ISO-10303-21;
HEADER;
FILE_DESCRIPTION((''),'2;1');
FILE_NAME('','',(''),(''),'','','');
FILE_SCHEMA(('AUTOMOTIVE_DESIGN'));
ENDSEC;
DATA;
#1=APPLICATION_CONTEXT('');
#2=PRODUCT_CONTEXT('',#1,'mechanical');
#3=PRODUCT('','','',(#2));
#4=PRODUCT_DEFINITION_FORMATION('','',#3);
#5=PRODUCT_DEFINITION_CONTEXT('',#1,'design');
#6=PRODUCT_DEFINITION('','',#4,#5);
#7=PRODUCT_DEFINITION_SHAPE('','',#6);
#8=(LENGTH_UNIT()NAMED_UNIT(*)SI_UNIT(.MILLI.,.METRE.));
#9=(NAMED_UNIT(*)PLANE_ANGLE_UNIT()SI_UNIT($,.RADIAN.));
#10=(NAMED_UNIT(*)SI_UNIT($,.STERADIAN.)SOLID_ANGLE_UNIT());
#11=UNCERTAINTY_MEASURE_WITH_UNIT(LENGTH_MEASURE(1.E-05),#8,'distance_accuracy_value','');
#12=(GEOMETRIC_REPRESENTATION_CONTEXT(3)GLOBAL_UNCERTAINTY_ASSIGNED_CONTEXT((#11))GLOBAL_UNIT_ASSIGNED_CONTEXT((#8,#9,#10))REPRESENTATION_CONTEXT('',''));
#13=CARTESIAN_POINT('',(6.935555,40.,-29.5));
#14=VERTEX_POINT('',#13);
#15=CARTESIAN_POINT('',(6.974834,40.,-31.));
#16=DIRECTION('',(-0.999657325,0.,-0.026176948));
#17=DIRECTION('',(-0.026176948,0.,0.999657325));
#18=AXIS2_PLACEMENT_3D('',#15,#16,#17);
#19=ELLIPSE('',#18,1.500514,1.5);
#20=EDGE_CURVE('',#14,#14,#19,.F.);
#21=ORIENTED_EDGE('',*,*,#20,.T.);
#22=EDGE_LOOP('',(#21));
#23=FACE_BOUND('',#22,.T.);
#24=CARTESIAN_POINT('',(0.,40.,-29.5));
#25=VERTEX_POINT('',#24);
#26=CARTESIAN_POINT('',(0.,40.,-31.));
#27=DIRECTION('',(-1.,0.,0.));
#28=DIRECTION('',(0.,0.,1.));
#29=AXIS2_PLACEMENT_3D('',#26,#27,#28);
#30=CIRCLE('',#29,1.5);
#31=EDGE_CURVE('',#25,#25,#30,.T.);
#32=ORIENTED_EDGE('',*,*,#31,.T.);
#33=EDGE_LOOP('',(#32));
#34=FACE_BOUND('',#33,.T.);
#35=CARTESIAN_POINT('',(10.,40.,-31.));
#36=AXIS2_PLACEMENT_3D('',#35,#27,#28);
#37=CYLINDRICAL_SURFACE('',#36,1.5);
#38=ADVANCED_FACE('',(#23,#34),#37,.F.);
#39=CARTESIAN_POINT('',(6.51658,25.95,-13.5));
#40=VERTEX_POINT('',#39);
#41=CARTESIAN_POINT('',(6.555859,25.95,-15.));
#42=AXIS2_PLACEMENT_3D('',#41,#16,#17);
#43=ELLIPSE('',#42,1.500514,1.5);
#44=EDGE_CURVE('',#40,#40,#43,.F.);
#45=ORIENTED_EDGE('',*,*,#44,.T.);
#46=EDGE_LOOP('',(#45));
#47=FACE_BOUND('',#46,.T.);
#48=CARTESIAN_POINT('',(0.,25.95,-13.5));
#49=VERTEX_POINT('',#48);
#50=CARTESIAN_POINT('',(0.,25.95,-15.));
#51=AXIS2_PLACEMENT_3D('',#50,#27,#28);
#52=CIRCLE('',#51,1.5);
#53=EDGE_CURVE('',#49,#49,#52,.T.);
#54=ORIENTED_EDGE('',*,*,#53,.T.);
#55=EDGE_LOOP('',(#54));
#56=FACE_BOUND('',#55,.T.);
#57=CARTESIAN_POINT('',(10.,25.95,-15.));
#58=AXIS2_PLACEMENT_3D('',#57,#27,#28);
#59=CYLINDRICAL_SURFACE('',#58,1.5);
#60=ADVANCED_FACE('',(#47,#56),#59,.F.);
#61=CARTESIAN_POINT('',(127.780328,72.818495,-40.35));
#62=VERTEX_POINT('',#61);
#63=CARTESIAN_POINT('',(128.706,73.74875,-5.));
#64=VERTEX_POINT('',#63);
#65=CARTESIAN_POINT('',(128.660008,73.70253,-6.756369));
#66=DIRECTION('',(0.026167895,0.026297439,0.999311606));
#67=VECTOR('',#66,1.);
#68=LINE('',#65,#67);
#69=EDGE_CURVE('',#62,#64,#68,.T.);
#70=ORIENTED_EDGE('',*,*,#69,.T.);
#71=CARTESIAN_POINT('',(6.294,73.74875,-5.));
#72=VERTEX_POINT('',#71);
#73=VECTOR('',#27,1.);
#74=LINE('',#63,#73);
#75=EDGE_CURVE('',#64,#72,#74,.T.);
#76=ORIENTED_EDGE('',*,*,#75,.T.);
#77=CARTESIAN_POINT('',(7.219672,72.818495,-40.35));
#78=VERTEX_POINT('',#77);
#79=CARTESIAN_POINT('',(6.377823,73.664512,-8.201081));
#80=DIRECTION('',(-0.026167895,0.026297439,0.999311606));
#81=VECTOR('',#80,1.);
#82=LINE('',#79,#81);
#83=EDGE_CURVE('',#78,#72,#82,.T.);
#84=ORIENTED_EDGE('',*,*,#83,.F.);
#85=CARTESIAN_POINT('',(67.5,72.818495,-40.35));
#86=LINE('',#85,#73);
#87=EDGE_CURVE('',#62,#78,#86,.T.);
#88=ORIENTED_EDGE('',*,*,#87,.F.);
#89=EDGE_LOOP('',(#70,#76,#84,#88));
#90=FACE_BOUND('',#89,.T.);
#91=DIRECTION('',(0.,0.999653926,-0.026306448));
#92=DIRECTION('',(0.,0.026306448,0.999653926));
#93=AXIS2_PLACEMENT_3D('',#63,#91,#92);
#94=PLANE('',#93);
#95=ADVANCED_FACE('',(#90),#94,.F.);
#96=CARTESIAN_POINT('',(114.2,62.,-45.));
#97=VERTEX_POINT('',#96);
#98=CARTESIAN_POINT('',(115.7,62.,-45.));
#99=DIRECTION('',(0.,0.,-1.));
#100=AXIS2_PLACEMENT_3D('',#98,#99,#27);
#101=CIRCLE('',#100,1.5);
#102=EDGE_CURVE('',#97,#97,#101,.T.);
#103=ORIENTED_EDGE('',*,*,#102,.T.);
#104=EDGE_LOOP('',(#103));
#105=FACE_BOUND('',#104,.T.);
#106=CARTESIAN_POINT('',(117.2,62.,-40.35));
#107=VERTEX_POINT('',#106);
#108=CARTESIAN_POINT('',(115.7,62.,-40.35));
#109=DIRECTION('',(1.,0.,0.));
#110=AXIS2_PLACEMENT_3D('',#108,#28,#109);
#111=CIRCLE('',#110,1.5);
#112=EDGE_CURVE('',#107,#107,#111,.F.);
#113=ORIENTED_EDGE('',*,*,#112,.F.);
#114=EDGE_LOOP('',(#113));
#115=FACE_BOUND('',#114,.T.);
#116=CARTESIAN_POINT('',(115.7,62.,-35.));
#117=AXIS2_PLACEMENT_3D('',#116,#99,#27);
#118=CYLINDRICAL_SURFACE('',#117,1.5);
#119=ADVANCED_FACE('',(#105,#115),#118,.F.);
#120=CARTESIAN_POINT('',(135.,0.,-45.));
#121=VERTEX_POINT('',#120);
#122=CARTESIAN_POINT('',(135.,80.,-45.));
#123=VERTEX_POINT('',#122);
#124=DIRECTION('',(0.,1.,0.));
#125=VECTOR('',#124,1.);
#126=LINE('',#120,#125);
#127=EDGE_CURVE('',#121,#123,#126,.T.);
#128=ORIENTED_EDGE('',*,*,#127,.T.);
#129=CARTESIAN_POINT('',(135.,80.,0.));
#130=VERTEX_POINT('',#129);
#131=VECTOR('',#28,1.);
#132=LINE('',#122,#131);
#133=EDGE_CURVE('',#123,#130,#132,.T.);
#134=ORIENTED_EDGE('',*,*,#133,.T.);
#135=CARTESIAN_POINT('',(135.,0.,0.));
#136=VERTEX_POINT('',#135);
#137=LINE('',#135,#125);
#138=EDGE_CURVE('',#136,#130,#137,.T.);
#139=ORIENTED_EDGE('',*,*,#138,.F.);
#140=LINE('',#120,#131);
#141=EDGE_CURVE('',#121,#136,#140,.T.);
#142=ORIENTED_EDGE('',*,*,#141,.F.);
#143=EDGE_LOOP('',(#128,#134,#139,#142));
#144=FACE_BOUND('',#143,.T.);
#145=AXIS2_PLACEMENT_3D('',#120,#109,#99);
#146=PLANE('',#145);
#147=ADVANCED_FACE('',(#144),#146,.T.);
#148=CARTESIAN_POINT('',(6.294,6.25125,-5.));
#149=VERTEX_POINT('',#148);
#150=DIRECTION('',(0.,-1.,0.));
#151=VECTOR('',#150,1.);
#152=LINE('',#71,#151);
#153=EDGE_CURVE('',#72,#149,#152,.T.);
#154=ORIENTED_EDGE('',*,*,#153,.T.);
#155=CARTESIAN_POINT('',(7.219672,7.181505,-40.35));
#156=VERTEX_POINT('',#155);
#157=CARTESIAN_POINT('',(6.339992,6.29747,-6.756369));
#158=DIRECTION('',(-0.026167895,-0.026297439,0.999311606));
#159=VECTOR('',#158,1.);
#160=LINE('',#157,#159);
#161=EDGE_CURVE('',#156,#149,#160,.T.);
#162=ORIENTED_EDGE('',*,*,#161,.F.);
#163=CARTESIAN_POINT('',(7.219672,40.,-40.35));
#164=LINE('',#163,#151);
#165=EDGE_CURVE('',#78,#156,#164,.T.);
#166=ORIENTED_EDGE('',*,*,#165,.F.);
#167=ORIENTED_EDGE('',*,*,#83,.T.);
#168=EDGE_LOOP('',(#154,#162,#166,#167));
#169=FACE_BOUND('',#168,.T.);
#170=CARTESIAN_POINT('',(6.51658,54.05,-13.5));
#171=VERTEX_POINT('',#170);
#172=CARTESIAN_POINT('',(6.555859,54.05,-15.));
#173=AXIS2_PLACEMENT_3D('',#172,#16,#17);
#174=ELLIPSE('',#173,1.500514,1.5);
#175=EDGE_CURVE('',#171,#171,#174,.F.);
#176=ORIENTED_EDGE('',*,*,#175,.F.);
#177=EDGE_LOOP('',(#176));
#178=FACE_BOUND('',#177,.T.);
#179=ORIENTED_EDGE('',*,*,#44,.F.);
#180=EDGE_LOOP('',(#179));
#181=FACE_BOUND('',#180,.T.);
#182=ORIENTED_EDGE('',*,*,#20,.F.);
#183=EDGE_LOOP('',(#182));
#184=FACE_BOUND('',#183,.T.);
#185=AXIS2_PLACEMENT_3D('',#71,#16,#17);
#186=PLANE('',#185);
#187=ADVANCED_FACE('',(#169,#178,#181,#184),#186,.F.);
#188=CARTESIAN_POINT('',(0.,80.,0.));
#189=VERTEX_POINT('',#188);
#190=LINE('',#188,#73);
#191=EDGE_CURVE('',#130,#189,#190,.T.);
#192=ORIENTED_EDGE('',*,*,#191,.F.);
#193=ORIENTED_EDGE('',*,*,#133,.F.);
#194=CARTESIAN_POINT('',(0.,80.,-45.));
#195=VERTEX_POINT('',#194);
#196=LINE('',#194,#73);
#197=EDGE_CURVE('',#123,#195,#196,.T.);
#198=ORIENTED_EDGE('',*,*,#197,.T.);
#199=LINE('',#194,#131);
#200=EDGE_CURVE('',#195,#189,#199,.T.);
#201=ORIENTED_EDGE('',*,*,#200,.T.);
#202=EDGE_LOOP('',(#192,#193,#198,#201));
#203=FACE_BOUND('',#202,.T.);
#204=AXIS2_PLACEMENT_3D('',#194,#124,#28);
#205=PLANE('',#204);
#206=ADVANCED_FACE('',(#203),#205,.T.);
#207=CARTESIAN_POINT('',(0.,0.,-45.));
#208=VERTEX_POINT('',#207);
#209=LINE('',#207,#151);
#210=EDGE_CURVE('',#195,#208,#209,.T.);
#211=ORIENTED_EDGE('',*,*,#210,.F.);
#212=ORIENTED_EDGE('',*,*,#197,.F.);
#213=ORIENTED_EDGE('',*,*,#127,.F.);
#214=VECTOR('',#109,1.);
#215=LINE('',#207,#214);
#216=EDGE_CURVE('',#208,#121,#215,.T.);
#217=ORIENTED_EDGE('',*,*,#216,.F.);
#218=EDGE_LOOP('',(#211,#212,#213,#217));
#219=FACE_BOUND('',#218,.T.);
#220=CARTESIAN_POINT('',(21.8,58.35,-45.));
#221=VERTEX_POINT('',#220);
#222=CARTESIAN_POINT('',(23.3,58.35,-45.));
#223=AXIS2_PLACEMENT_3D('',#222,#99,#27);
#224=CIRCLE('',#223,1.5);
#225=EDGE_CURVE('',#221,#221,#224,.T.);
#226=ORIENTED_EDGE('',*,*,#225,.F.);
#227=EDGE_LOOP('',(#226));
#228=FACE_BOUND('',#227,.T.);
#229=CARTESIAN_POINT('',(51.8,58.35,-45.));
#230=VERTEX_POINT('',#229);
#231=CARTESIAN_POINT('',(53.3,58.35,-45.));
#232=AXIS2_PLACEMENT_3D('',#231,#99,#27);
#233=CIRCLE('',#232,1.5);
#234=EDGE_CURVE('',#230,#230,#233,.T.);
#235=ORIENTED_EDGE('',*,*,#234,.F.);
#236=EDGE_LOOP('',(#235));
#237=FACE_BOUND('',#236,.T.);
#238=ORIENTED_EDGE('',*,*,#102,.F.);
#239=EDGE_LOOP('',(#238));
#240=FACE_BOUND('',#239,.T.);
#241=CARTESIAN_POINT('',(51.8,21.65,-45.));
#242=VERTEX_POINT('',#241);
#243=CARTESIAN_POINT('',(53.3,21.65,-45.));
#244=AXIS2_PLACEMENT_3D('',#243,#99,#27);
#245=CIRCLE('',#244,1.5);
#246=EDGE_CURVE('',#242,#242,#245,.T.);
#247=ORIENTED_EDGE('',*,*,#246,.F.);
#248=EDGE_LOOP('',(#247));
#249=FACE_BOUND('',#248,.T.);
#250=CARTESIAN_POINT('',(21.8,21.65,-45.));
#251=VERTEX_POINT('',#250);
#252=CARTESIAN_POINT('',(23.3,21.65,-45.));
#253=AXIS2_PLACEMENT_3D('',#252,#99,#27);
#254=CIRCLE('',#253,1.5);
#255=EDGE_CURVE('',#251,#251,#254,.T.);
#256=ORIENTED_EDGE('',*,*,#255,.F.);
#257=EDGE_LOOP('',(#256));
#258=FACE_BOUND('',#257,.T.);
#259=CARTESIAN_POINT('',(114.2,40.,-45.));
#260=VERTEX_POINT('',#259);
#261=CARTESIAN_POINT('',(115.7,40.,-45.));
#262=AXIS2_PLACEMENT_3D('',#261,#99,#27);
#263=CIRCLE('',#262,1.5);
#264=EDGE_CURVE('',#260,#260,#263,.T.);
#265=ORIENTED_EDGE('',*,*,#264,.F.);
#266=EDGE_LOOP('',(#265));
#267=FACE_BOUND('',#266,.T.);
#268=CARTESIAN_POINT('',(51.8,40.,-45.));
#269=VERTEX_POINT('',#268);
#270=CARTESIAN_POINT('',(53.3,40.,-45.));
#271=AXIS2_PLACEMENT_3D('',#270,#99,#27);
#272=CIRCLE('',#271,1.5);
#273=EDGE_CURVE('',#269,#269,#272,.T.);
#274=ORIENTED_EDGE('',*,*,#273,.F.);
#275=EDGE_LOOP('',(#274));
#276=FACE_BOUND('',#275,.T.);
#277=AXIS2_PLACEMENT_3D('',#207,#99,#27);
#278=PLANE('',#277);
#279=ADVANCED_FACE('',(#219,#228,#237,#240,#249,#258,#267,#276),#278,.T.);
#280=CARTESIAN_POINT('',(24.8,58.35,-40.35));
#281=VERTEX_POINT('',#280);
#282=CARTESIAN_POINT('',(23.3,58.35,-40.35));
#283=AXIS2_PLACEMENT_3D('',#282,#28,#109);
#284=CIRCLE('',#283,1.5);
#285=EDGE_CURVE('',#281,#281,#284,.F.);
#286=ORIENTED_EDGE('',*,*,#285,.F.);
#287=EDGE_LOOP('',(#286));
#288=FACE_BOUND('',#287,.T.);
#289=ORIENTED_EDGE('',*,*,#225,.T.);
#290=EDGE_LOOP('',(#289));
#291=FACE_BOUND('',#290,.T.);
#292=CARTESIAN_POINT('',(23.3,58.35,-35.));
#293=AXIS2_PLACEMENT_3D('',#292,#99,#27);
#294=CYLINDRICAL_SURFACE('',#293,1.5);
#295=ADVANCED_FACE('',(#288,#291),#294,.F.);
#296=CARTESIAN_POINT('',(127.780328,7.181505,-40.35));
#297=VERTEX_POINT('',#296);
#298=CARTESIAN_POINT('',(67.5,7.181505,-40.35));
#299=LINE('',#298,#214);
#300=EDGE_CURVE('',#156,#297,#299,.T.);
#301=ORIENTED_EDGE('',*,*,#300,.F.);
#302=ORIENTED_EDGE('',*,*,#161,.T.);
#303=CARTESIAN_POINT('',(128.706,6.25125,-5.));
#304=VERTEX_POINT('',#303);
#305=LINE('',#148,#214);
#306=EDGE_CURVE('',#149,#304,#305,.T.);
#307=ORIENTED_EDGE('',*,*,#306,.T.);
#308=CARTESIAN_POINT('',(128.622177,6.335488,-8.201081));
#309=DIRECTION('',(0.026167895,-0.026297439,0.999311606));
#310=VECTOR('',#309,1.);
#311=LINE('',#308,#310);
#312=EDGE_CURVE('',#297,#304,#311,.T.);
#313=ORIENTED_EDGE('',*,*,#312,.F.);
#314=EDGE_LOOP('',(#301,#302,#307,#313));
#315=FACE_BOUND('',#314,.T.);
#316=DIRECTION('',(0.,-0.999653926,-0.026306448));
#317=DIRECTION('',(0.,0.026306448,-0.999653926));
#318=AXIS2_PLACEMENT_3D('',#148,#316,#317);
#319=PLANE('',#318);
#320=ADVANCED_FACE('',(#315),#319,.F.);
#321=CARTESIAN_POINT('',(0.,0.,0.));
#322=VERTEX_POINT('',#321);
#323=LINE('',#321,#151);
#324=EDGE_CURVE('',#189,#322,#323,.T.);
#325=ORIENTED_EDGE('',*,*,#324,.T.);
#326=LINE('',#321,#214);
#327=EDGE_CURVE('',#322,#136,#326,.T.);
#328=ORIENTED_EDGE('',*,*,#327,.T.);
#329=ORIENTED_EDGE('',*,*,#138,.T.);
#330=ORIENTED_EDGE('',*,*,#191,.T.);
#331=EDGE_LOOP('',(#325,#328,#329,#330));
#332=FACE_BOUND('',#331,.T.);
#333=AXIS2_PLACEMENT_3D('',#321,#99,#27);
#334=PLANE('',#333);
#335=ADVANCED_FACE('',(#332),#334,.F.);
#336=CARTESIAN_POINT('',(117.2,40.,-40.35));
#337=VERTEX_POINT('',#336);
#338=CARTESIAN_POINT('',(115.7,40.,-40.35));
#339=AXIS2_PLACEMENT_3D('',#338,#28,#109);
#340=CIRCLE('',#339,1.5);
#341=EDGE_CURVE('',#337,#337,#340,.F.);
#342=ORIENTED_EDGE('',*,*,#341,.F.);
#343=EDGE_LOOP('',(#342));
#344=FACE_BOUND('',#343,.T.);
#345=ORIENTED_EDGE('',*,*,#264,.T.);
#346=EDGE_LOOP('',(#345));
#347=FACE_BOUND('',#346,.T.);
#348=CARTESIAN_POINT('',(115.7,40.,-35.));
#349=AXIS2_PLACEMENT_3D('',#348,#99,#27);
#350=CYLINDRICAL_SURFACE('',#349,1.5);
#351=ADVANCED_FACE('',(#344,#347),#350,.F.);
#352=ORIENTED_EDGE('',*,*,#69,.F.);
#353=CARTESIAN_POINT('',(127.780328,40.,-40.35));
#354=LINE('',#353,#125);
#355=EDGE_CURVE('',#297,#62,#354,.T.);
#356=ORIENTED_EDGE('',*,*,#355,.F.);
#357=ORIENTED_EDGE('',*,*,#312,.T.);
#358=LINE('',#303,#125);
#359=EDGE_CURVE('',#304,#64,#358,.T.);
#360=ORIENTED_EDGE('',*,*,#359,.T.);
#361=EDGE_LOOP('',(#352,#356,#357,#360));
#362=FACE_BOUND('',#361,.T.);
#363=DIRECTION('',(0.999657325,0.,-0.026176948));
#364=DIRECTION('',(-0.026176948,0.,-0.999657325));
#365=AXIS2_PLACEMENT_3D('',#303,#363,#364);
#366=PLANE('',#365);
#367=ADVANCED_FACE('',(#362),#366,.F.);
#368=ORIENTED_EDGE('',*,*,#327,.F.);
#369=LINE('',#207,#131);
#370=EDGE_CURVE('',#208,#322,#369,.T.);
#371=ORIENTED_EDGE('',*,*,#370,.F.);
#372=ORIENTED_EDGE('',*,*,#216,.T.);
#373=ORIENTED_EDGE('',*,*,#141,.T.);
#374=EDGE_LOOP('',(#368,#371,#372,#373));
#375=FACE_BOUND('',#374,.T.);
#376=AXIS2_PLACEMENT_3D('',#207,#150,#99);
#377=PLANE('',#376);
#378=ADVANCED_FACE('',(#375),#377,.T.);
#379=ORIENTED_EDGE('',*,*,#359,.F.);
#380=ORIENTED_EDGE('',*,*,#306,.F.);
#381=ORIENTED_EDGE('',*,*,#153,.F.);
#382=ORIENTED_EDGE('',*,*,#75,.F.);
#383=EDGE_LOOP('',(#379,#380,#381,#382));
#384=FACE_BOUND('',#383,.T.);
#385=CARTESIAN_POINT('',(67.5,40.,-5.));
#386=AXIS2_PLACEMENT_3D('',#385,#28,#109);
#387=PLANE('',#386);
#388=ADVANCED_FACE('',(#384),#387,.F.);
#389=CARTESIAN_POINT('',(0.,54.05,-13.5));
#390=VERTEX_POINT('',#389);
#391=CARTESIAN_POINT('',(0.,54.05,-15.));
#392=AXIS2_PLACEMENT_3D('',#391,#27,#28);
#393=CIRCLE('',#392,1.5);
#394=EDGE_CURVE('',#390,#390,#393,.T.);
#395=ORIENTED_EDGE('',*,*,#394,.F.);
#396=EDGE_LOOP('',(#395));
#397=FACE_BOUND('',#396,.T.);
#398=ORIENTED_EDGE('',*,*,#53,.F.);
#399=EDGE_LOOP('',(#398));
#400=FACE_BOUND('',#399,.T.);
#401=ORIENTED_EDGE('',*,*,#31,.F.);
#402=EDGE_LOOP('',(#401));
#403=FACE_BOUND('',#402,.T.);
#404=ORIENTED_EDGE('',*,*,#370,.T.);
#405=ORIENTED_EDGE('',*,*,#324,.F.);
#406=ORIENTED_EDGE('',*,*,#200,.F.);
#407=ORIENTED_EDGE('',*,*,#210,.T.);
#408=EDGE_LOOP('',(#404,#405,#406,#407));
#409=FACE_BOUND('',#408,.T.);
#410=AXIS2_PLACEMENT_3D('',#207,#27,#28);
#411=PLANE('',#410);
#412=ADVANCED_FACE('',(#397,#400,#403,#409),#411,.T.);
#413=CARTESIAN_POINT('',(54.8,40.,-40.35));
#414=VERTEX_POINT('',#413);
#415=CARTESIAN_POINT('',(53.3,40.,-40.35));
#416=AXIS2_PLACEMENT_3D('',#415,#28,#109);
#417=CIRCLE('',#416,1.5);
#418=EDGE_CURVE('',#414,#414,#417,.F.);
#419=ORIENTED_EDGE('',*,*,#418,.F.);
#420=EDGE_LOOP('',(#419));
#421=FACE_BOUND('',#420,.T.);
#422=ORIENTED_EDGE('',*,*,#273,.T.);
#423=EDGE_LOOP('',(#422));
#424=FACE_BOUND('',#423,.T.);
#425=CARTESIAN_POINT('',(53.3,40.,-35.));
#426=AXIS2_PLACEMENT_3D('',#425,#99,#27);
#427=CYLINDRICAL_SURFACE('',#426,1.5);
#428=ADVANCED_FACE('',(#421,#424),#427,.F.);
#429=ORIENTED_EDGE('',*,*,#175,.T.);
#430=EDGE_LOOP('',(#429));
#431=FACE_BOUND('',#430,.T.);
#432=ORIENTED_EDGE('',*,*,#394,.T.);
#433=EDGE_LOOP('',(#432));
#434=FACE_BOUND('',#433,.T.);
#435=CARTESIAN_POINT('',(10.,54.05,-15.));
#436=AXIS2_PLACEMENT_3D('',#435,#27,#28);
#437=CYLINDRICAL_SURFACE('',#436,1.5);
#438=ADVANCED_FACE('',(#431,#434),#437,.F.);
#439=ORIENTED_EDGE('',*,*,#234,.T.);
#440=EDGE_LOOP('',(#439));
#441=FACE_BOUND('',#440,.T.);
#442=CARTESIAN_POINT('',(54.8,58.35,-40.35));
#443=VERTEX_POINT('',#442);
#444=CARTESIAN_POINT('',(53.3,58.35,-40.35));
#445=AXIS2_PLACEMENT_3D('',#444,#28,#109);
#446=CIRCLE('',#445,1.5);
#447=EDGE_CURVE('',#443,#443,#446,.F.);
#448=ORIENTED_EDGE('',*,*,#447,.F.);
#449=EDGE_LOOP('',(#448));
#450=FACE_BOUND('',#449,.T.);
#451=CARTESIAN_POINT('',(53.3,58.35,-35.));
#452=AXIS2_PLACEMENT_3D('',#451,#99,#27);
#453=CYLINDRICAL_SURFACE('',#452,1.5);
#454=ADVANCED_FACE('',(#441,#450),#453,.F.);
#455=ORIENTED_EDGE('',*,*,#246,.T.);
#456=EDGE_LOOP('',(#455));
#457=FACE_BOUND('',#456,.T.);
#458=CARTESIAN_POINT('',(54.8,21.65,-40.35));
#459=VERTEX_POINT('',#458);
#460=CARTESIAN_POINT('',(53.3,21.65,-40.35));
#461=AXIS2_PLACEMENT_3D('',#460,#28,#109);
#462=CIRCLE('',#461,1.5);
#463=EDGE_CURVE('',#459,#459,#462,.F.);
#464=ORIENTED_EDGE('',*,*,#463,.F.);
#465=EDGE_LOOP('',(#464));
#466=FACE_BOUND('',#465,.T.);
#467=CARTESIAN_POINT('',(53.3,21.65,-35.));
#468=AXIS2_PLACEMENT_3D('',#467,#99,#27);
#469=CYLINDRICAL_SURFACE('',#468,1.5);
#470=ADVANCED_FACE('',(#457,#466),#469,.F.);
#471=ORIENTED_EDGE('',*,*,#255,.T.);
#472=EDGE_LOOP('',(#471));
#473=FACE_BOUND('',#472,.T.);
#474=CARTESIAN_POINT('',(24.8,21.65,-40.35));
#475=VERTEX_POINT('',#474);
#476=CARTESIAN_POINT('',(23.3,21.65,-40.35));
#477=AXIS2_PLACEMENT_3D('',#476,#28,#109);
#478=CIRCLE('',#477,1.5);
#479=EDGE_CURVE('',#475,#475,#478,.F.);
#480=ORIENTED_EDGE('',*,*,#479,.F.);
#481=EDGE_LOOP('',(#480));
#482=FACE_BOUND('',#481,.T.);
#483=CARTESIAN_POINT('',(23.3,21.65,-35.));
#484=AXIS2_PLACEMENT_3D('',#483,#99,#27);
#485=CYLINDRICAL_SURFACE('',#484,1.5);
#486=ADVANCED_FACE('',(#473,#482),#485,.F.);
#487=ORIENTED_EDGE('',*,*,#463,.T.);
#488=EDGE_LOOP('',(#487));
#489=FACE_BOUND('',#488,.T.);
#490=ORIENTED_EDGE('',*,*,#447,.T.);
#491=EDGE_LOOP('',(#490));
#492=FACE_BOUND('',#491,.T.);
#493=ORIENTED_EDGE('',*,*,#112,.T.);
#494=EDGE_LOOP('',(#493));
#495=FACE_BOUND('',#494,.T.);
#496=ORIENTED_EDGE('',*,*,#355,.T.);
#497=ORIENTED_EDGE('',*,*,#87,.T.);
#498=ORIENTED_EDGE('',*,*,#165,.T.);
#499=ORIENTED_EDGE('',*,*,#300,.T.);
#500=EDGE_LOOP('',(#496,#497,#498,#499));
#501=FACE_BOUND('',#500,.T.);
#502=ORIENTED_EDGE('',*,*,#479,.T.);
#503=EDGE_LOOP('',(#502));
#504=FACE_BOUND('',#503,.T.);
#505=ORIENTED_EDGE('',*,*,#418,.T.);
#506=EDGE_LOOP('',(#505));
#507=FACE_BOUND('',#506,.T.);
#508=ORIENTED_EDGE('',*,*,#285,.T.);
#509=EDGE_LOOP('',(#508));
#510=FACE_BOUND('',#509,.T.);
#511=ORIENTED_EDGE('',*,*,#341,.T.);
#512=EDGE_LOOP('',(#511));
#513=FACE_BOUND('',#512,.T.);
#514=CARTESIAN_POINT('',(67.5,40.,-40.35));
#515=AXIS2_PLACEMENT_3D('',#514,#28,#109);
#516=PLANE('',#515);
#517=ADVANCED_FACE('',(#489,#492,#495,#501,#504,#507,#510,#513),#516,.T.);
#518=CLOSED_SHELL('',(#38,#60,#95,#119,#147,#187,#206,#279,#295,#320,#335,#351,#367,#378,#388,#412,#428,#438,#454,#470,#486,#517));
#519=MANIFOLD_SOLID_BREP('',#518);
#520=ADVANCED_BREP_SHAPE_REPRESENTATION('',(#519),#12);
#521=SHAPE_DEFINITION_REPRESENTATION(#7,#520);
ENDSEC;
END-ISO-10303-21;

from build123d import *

# Parameters (mm, degrees)
SKETCH1_W           = 135
SKETCH1_H           = 80
BOSS_EXTRUDE1_DEPTH = 45
SKETCH2_R           = 1.5
CUT_EXTRUDE1_DEPTH  = 10
SKETCH3_R           = 1.5
CUT_EXTRUDE2_DEPTH  = 10
CAVITY1_START       = 6.25125
CAVITY1_DEPTH       = 67.4975
CAVITY1_START_2     = 5
CAVITY1_2_DEPTH     = 125


with BuildPart() as part:
    # Sketch1 → Boss-Extrude1 (new body)
    with BuildSketch(Plane.XY):
        with Locations((67.5, 40)):
            Rectangle(SKETCH1_W, SKETCH1_H)
    extrude(amount=-BOSS_EXTRUDE1_DEPTH)

    # Sketch2 → Cut-Extrude1 (cut)
    with BuildSketch(Plane(origin=(0, 0, -45), x_dir=(-1, 0, 0), z_dir=(0, 0, -1))):
        with Locations((-53.3, 40)):
            Circle(SKETCH2_R)
        with Locations((-53.3, 58.35)):
            Circle(SKETCH2_R)
        with Locations((-53.3, 21.65)):
            Circle(SKETCH2_R)
        with Locations((-23.3, 58.35)):
            Circle(SKETCH2_R)
        with Locations((-23.3, 21.65)):
            Circle(SKETCH2_R)
        with Locations((-115.7, 40)):
            Circle(SKETCH2_R)
        with Locations((-115.7, 62)):
            Circle(SKETCH2_R)
    extrude(amount=-CUT_EXTRUDE1_DEPTH, mode=Mode.SUBTRACT)

    # Sketch3 → Cut-Extrude2 (cut)
    with BuildSketch(Plane.ZY):
        with Locations((-15, 54.05)):
            Circle(SKETCH3_R)
        with Locations((-15, 25.95)):
            Circle(SKETCH3_R)
        with Locations((-31, 40)):
            Circle(SKETCH3_R)
    extrude(amount=-CUT_EXTRUDE2_DEPTH, mode=Mode.SUBTRACT)

    # Cavity1: read off the stored shape, not the designer's step
    # Cavity1 outline → Cavity1 (cut)
    with BuildSketch(Plane(origin=(0, 0, 0), x_dir=(1, 0, 0), z_dir=(0, 1, 0)).offset(CAVITY1_START)):
        Polygon((127.780327673, 40.35), (7.219672327, 40.35), (6.294, 5), (128.706, 5), align=None)
    extrude(amount=CAVITY1_DEPTH, mode=Mode.SUBTRACT)

    # Cavity1 2 outline → Cavity1 2 (add)
    with BuildSketch(Plane.YZ.offset(CAVITY1_START_2)):
        Polygon((73.74875, -5), (72.818495136, -40.35), (73.74875, -40.35), align=None)
        Polygon((7.181504864, -40.35), (6.25125, -5), (6.25125, -40.35), align=None)
    extrude(amount=CAVITY1_2_DEPTH)


solid = part.part
